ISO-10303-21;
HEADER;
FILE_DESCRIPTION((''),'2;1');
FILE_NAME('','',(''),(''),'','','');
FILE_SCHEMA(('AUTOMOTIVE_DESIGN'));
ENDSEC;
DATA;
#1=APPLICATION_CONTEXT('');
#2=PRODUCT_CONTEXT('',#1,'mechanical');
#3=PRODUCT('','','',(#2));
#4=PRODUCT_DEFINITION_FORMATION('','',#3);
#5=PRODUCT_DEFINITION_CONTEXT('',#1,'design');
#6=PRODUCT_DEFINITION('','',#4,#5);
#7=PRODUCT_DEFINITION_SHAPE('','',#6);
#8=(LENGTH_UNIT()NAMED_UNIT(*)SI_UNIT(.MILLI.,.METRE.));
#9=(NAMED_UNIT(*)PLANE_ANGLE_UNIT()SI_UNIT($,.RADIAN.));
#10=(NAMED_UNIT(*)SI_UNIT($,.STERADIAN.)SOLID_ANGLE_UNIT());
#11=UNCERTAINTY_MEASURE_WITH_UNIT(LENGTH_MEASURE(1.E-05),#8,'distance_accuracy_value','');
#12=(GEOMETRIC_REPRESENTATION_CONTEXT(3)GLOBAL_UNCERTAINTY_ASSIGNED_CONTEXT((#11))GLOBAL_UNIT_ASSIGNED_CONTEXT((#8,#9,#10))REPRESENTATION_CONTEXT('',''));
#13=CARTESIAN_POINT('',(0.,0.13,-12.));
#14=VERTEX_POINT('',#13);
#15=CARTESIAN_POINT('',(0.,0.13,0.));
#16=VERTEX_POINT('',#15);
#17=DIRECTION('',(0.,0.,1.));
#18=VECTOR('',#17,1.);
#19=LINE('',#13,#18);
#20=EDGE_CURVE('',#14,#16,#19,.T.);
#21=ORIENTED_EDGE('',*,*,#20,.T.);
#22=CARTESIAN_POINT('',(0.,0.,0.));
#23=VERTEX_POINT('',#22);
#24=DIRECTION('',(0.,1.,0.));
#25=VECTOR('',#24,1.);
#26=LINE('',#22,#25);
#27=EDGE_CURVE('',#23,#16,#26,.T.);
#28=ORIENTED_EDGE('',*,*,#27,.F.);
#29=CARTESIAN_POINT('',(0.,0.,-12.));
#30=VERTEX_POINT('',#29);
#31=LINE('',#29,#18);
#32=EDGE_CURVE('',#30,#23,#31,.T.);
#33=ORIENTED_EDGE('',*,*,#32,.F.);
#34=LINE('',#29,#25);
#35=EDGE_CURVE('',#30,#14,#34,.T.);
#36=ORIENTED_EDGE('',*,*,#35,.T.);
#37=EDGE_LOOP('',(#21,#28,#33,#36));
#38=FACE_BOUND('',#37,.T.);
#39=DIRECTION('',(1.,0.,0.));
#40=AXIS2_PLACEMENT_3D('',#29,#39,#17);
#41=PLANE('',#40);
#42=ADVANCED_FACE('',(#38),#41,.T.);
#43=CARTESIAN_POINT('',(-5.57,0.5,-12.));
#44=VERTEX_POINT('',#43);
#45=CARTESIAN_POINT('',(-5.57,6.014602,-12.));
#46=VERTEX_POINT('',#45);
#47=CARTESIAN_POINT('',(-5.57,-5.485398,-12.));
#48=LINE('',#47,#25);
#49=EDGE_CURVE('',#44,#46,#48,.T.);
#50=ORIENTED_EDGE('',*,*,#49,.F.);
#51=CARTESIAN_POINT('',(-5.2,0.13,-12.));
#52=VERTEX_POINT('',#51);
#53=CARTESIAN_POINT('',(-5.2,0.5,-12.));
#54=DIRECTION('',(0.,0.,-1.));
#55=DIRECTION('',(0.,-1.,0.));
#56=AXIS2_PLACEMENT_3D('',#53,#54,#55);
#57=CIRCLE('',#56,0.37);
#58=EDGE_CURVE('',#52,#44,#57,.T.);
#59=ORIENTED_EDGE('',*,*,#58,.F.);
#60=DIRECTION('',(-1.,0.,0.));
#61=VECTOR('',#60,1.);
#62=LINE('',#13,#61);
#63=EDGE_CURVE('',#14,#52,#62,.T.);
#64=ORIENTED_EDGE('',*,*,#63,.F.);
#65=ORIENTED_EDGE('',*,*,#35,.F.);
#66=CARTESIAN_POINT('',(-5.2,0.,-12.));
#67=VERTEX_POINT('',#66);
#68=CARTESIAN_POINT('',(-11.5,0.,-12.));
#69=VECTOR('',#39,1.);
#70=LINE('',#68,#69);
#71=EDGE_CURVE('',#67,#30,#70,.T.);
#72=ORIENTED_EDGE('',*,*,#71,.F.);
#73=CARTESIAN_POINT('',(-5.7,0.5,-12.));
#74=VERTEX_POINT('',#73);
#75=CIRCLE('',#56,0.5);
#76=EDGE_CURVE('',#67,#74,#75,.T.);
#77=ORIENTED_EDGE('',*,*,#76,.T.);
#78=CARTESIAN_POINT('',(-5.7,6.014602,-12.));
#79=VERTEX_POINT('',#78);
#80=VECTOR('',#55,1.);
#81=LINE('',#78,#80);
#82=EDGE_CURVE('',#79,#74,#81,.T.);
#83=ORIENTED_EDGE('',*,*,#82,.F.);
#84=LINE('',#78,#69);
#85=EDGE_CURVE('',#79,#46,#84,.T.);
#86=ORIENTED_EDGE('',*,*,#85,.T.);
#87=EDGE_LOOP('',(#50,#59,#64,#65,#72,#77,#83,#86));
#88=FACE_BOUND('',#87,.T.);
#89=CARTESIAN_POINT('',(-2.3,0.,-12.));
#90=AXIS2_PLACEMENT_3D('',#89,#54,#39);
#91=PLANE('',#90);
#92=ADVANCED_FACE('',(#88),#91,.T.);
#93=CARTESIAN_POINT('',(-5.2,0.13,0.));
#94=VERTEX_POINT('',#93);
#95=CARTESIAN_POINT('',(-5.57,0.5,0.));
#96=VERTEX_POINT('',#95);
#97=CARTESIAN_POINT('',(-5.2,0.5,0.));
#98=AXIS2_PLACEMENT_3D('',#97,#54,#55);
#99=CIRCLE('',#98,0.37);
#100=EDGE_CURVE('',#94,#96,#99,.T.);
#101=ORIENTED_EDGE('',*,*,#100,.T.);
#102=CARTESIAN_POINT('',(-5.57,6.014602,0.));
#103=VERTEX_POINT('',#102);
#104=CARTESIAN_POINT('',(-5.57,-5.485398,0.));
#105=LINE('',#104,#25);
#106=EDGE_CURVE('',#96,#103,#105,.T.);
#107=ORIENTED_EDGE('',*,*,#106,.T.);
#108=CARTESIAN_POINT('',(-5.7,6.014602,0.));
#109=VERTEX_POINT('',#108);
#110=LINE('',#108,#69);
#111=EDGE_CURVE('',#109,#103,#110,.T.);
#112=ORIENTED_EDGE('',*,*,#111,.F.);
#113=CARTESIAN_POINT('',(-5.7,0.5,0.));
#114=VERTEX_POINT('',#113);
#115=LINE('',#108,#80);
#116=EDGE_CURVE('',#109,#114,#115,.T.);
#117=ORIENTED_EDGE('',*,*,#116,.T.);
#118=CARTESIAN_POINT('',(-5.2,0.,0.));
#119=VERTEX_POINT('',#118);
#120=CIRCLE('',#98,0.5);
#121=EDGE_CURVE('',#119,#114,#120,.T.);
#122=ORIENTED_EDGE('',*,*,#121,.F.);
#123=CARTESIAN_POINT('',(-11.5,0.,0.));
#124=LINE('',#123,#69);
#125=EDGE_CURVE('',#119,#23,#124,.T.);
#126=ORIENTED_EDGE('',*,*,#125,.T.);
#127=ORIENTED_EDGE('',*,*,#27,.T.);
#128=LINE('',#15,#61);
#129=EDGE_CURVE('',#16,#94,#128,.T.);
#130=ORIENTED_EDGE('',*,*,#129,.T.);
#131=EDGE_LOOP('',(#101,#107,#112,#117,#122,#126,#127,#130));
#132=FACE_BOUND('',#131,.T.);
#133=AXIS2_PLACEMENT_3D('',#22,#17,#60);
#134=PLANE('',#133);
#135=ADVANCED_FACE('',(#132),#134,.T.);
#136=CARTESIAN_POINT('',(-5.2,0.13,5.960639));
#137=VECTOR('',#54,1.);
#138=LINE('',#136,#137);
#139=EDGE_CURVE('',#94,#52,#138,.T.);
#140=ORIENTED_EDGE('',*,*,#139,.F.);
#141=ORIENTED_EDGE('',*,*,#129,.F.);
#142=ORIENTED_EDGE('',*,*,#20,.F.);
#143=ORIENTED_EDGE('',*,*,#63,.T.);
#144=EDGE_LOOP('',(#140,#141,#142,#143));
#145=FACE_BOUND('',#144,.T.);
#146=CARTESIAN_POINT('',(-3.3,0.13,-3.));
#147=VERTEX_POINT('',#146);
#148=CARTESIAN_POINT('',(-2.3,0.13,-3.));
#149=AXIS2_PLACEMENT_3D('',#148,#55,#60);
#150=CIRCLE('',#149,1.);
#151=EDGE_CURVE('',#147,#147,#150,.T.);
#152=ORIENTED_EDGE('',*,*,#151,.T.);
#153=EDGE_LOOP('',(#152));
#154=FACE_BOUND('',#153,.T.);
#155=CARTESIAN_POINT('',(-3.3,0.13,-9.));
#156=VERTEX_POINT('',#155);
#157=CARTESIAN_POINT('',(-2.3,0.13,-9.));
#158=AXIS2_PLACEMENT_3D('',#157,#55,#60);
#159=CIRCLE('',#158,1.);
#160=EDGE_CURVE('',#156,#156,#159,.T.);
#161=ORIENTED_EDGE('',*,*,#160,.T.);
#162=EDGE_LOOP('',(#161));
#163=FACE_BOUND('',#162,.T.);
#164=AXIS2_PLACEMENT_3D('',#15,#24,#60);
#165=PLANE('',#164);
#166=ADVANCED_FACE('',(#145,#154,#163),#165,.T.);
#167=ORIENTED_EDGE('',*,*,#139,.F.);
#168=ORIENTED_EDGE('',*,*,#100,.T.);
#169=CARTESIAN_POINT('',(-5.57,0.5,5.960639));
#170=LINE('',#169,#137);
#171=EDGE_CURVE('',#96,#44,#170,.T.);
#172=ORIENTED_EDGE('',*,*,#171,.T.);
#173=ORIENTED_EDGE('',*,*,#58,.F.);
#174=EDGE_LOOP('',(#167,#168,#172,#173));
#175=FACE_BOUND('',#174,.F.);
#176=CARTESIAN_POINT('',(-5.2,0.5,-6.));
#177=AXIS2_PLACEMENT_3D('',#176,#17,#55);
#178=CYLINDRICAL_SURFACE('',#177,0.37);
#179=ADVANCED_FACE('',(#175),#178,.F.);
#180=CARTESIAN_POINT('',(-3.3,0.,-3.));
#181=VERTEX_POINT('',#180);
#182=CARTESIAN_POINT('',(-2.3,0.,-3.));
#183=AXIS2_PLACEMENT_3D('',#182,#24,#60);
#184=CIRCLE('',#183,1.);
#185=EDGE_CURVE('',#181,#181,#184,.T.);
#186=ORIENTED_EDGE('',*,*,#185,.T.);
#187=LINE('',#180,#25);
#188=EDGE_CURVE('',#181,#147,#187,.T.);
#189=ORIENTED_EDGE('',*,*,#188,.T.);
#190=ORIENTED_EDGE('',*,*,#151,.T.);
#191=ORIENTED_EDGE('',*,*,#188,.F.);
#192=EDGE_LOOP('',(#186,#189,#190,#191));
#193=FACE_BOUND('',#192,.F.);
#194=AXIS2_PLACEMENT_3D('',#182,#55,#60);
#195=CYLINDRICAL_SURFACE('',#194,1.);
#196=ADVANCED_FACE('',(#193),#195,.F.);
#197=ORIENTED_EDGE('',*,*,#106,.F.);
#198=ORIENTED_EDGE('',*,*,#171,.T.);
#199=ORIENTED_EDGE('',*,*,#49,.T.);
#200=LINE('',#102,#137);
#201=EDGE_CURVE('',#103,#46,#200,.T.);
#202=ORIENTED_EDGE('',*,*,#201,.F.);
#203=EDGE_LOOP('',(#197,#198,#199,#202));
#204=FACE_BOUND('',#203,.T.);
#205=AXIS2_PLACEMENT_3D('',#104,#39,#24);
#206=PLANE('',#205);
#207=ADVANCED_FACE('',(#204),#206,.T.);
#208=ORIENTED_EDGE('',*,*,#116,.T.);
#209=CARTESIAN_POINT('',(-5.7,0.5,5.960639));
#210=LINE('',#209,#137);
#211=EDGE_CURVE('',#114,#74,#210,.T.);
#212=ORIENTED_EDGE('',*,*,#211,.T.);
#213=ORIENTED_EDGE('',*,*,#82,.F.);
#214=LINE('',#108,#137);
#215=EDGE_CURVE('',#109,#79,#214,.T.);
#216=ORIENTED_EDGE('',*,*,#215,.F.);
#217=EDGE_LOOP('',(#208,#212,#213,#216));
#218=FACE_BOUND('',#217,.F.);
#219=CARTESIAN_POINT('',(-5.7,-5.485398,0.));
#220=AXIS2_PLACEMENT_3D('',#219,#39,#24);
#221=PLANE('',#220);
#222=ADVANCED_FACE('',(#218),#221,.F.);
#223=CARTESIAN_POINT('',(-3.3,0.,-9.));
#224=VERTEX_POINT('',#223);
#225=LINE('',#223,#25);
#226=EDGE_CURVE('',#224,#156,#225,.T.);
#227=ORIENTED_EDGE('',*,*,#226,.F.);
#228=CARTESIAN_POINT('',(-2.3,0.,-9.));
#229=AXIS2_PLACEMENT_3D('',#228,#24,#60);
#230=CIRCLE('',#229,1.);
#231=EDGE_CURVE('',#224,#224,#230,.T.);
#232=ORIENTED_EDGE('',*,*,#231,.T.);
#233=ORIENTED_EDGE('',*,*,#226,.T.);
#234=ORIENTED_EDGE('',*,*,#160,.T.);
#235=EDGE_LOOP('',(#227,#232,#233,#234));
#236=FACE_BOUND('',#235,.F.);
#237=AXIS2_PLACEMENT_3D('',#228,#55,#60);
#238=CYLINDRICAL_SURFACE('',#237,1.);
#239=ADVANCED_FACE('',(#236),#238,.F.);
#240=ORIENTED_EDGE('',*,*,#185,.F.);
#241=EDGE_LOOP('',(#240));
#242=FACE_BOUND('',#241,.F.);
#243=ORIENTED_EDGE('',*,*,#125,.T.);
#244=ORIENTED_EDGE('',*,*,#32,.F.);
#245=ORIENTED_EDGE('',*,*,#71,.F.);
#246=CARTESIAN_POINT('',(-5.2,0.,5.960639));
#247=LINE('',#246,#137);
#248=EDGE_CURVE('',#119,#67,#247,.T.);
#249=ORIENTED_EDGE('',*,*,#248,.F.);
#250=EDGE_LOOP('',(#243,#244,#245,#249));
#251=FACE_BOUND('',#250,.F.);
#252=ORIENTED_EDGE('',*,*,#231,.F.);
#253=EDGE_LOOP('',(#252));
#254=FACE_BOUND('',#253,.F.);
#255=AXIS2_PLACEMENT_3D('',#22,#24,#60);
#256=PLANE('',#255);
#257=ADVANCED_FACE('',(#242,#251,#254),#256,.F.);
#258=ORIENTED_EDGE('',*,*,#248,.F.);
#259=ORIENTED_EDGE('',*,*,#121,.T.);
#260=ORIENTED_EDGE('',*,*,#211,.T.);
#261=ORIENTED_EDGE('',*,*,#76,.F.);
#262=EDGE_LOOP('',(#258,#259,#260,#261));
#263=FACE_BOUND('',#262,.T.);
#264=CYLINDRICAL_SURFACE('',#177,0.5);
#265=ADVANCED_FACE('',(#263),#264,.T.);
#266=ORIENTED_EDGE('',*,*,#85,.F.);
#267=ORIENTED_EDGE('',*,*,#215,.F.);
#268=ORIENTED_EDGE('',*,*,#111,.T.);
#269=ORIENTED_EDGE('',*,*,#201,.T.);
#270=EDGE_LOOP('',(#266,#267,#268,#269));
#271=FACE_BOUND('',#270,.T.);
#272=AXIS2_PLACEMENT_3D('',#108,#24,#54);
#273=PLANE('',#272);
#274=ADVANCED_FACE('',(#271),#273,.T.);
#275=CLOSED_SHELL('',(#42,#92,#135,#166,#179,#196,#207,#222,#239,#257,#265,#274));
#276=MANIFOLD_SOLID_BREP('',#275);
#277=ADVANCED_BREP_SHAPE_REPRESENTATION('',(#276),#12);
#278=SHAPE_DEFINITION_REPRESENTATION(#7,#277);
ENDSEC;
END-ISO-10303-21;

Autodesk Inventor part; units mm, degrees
ref_plane "YZ Plane" through (0, 0, 0) normal (1, 0, 0) x (0, 1, 0)
ref_plane "XZ Plane" through (0, 0, 0) normal (0, 1, 0) x (-1, 0, 0)
ref_plane "XY Plane" through (0, 0, 0) normal (0, 0, 1) x (1, 0, 0)
sketch "Sketch1" plane through (0, 0, 0) normal (0, 1, 0) x (-1, 0, 0)
  line L0 (0, 0) -> (11.5, 0)
  line L1 (11.5, 0) -> (11.5, -12)
  line L2 (11.5, -12) -> (0, -12)
  line L3 (0, -12) -> (0, 0)
  line L4 (0, -12) -> (5.2, -12)
  line L5 (5.2, -12) -> (5.2, 0)
  line L6 (5.2, 0) -> (0, 0)
  line L7 (0, 0) -> (0, -12)
  line L8 (0, 0) -> (2.3, 0)
  line L9 (2.3, 0) -> (2.3, -12)
  line L10 (2.3, -12) -> (0, -12)
  line L11 (0, -12) -> (0, 0)
  line L12 (2.3, 0) -> (2.3, -3)
  line L13 (2.3, -3) -> (2.3, -9)
  circle A0 centre (2.3, -3) radius 1
  circle A1 centre (2.3, -9) radius 1
  dimension "d0" = 11.5
  dimension "d1" = 12
  dimension "d2" = 5.2
  dimension "d3" = 2.3
  dimension "d4" = 3
  dimension "d5" = 6
  dimension "d6" = 2
  dimension "d7" = 2
extrude "Extrusion1" add sketch "Sketch1" along normal blind 0.13 contours L0 L9 A0 A1 L2 L3 | L0 L5 L2 L9 A1 A0 | L0 L1 L2 L5
bend part "Bend Part1" radius 0.5 angle 90 line through (-5.2, 0, -12) along (0, 0, 1) centre toward (0, 1, 0) moving side (-1, 0, 0) both sides no
properties part number "Clmap for sample mount for new Leica System"
